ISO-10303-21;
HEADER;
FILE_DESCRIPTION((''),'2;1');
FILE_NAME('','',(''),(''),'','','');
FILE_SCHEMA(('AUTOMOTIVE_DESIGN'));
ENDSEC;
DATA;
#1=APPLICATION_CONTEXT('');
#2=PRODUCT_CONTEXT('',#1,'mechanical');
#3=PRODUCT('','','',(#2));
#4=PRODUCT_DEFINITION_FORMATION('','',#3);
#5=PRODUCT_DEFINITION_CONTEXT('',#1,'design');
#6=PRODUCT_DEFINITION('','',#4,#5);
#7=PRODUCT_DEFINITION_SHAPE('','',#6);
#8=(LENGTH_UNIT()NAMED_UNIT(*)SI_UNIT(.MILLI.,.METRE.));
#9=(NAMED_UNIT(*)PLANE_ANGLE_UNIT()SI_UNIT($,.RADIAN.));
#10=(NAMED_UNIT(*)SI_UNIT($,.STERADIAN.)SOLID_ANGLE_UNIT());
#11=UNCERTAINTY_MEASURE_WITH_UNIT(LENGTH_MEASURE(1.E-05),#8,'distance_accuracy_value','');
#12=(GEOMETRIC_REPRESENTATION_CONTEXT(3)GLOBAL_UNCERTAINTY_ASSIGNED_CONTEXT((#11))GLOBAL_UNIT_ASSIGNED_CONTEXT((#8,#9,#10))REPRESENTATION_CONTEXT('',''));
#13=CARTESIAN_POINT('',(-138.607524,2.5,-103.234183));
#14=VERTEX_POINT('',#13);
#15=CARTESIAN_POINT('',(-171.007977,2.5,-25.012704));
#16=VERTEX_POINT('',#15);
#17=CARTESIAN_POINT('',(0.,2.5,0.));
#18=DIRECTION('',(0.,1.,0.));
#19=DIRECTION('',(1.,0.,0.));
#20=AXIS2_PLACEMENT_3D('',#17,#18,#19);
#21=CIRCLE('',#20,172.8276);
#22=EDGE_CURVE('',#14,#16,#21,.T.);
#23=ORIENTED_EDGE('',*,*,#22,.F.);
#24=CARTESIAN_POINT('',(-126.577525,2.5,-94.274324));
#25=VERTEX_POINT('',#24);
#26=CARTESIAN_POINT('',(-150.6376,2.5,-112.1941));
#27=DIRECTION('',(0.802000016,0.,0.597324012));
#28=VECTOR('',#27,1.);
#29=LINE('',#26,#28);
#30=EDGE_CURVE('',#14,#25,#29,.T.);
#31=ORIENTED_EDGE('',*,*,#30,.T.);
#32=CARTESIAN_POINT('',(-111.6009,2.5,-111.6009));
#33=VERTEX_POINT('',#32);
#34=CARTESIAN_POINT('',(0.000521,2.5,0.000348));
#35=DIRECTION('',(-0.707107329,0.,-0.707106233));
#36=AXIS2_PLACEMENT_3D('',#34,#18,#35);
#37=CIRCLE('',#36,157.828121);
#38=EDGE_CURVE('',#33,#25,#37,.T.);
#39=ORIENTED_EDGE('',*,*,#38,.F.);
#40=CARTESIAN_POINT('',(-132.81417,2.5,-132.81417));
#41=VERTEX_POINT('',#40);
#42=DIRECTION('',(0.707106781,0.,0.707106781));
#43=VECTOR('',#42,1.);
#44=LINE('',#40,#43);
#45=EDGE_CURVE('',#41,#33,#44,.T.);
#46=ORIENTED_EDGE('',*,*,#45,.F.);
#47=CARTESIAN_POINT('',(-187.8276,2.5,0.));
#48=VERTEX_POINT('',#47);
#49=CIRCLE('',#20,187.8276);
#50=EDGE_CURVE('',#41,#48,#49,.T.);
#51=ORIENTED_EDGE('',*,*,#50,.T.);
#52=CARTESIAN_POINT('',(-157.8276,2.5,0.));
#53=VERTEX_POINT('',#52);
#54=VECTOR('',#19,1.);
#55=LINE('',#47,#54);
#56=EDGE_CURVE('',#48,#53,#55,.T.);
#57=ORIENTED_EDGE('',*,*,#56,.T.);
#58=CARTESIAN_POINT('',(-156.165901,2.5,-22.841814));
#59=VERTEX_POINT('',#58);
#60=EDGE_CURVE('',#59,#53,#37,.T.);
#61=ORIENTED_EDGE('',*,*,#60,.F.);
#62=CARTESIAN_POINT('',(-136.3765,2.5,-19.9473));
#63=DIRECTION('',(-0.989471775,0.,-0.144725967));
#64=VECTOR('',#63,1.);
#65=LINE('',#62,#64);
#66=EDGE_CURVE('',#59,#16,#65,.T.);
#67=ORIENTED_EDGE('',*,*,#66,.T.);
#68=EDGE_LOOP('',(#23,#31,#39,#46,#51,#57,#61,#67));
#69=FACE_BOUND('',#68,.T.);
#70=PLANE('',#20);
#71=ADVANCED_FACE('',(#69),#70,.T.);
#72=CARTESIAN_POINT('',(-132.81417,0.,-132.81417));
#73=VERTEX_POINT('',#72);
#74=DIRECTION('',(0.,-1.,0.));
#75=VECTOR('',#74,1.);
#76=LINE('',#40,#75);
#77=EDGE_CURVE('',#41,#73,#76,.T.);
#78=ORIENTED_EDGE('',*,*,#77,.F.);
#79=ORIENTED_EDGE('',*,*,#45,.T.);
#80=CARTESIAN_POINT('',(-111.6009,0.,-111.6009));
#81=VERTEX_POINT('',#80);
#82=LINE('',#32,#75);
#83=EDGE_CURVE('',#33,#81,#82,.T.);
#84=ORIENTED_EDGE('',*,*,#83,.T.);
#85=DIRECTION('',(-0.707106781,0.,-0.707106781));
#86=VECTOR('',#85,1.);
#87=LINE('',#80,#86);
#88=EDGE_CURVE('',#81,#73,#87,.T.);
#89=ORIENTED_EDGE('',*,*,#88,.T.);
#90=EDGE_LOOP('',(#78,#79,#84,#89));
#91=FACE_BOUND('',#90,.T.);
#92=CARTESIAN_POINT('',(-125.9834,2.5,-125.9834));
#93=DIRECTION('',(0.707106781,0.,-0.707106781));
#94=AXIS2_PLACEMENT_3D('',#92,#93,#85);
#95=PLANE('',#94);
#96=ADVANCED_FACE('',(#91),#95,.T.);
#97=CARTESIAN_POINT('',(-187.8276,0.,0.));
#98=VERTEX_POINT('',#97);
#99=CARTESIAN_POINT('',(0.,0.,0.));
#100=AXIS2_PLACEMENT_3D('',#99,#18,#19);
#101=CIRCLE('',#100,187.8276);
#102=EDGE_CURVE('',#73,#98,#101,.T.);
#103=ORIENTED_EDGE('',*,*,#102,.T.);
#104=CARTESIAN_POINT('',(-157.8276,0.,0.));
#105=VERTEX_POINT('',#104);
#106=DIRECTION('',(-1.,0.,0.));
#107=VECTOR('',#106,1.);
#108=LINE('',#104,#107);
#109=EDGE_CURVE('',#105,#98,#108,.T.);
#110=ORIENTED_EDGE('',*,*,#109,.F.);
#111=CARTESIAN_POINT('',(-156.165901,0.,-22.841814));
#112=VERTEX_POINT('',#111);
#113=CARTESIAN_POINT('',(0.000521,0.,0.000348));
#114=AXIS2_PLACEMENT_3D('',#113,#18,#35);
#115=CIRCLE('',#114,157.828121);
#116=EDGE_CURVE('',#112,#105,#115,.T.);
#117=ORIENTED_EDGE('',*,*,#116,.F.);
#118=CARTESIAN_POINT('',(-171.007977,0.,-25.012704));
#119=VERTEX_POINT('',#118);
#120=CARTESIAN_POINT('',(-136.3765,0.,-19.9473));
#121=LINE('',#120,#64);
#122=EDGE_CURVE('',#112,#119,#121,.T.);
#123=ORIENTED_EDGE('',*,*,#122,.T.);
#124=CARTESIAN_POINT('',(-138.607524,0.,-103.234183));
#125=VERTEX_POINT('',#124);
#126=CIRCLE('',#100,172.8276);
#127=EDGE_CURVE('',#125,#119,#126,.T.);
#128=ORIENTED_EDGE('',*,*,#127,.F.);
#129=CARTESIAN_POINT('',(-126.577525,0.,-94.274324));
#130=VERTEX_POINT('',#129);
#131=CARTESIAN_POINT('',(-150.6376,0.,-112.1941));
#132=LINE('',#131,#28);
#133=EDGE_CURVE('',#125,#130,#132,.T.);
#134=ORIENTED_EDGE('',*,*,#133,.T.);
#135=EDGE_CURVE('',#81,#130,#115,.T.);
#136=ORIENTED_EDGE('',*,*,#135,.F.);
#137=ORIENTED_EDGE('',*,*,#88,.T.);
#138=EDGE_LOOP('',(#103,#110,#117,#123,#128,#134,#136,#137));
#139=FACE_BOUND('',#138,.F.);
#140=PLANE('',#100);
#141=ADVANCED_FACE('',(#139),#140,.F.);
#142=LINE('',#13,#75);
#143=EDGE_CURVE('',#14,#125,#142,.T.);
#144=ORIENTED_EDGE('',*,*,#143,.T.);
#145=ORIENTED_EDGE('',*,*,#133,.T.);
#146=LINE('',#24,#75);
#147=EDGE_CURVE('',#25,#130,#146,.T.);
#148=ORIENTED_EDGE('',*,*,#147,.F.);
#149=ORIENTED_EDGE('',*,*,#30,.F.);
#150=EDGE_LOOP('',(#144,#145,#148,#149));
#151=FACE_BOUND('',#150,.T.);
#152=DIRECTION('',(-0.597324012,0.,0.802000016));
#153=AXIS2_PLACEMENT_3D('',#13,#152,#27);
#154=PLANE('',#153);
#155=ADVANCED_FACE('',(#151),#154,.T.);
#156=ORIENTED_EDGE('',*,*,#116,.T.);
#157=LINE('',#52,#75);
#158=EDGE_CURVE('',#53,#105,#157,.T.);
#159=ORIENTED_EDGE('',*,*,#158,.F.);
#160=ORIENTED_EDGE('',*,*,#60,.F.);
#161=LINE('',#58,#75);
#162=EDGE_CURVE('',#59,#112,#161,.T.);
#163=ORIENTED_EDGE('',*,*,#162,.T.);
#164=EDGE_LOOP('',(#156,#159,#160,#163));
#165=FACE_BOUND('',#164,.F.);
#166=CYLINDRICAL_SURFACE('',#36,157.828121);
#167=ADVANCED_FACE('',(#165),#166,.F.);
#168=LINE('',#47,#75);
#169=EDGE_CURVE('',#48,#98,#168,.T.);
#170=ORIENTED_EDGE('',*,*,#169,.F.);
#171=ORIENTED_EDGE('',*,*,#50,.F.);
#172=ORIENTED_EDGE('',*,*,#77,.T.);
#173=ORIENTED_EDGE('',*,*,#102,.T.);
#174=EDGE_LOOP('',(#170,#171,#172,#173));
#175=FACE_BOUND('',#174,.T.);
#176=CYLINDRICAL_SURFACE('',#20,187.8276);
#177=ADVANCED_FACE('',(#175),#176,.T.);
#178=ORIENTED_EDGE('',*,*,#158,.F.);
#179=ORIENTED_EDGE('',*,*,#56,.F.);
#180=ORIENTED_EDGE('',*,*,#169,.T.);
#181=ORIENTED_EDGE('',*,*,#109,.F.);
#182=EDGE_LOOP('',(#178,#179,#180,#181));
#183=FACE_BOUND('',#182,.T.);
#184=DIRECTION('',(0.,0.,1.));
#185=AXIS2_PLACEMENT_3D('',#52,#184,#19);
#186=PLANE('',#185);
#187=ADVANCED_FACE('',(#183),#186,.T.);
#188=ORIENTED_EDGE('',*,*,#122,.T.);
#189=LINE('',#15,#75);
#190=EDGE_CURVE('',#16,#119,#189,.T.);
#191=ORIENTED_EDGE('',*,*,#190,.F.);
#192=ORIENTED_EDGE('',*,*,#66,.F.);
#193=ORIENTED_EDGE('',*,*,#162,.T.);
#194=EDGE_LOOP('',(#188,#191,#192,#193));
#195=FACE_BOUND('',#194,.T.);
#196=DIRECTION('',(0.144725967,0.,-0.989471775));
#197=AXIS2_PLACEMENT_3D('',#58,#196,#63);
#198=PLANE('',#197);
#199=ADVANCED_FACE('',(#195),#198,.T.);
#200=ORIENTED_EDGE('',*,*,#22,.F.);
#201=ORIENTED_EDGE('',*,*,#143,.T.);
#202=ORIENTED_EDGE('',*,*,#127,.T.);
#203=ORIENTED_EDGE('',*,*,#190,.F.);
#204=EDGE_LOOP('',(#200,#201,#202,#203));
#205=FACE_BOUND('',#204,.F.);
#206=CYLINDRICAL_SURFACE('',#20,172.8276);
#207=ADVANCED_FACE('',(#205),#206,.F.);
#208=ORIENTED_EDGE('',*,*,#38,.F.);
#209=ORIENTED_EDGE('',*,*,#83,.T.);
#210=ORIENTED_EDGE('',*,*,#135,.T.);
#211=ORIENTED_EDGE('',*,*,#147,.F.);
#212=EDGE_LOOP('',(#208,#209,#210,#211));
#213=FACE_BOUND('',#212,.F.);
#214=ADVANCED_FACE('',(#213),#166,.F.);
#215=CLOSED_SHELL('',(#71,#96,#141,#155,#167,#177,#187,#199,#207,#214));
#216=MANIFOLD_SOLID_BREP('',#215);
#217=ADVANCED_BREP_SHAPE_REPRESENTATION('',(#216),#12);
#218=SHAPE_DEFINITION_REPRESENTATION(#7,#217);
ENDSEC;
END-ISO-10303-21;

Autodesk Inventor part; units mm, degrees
ref_plane "YZ Plane" through (0, 0, 0) normal (1, 0, 0) x (0, 1, 0)
ref_plane "XZ Plane" through (0, 0, 0) normal (0, 1, 0) x (-1, 0, 0)
ref_plane "XY Plane" through (0, 0, 0) normal (0, 0, 1) x (1, 0, 0)
sketch "スケッチ1" plane through (0, 0, 0) normal (0, 1, 0) x (-1, 0, 0)
  circle A0 centre (0, 0) radius 178.1675
  circle A1 centre (0, 0) radius 157.8276
  line L0 (168.1877, 0) -> (166.7488, -21.9529)
  line L1 (168.1877, 0) -> (130.1721, 2.4917) construction
  line L2 (249.4344, 0) -> (-249.4344, 0) projected
  line L3 (166.7488, -21.9529) -> (156.7702, -21.2989)
  line L4 (156.7702, -21.2989) -> (158.2091, 0.654) construction
  line L5 (158.2091, 0.654) -> (168.1877, 0)
  line L6 (157.4896, -10.3224) -> (0, 0)
  line L7 (166.7488, -21.9529) -> (162.4568, -43.5302)
  line L8 (162.4568, -43.5302) -> (152.649, -41.5793) construction
  line L9 (152.649, -41.5793) -> (156.9409, -20.002) construction
  line L10 (156.9409, -20.002) -> (166.7488, -21.9529) construction
  line L11 (162.4568, -43.5302) -> (155.3851, -64.3626)
  line L12 (155.3851, -64.3626) -> (145.9158, -61.1482) construction
  line L13 (145.9158, -61.1482) -> (152.9875, -40.3158) construction
  line L14 (152.9875, -40.3158) -> (162.4568, -43.5302) construction
  line L15 (155.3851, -64.3626) -> (145.6548, -84.0938)
  line L16 (145.6548, -84.0938) -> (136.6861, -79.6709) construction
  line L17 (136.6861, -79.6709) -> (146.4164, -59.9397) construction
  line L18 (146.4164, -59.9397) -> (155.3851, -64.3626) construction
  line L19 (0, 0) -> (111.6009, -111.6009)
  line L20 (145.6548, -84.0938) -> (137.3401, -78.5381) construction
  line L21 (137.3401, -78.5381) -> (125.1176, -96.8305) construction
  line L22 (125.1176, -96.8305) -> (133.4323, -102.3862) construction
  line L23 (133.4323, -102.3862) -> (145.6548, -84.0938)
  line L24 (133.4323, -102.3862) -> (125.9139, -95.7927) construction
  line L25 (125.9139, -95.7927) -> (111.4082, -112.3332) construction
  line L26 (111.4082, -112.3332) -> (118.9266, -118.9266)
  line L27 (118.9266, -118.9266) -> (133.4323, -102.3862)
  line L28 (111.6009, -111.6009) -> (118.9266, -118.9266)
  line L29 (166.7488, -21.9529) -> (176.7274, -22.6069) construction
  line L30 (118.9266, -118.9266) -> (125.9834, -125.9834)
  point P0 (154.795, -30.7906)
  point P1 (149.4517, -50.732)
  point P2 (141.5512, -69.8053)
  point P3 (131.2288, -87.6843)
  point P4 (118.661, -104.0629)
  point P5 (157.8276, 0)
  point P6 (178.1675, 0)
  dimension "d0" = 22
  dimension "d1" = 10
  dimension "d2" = 45
  dimension "d4" = 315.6551
extrude "押し出し1" add sketch "スケッチ1" along normal blind 2.5 contours L30 L27 L23 L15 L11 L7 L0 L2 A0 | L28 A1 L2 L0 L7 L11 L15 L23 L27
sketch "スケッチ2" plane through (0, 2.5, 0) normal (0, 1, 0) x (1, 0, 0)
  circle A0 centre (0, 0) radius 277.8276
  line L0 (-168.1877, 0) -> (-166.7488, 21.9529) projected
  line L1 (-166.7488, 21.9529) -> (-162.4568, 43.5302) projected
  line L2 (-162.4568, 43.5302) -> (-155.3851, 64.3626) projected
  line L3 (-155.3851, 64.3626) -> (-145.6548, 84.0938) projected
  line L4 (-133.4323, 102.3862) -> (-145.6548, 84.0938) projected
  line L5 (-118.9266, 118.9266) -> (-133.4323, 102.3862) projected
  line L6 (-167.4682, 10.9764) -> (-166.0294, 32.9293)
  line L7 (-166.0294, 32.9293) -> (-275.7938, 40.1237)
  line L8 (-275.7938, 40.1237) -> (-277.2327, 18.1708)
  line L9 (-277.2327, 18.1708) -> (-167.4682, 10.9764)
  line L10 (-164.6028, 32.7415) -> (-160.3108, 54.3188)
  line L11 (-160.3108, 54.3188) -> (-268.1972, 75.7787)
  line L12 (-268.1972, 75.7787) -> (-272.4892, 54.2015)
  line L13 (-272.4892, 54.2015) -> (-164.6028, 32.7415)
  circle A1 centre (-166.7488, 21.9529) radius 11
  circle A2 centre (-162.4568, 43.5302) radius 11
  line L14 (-158.921, 53.9464) -> (-151.8493, 74.7789)
  line L15 (-151.8493, 74.7789) -> (-256.0116, 110.1372)
  line L16 (-256.0116, 110.1372) -> (-263.0833, 89.3047)
  line L17 (-263.0833, 89.3047) -> (-158.921, 53.9464)
  circle A3 centre (-155.3851, 64.3626) radius 11
  arc A4 (-275.7591, 62.4834) -> (-281.3553, 41.7349) centre (-166.7488, 21.9529) ccw
  line L18 (-178.1663, 0.654) -> (-158.2091, -0.654)
  line L19 (-158.2091, -0.654) -> (-156.7702, 21.2989)
  line L20 (-156.7702, 21.2989) -> (-176.7274, 22.6069)
  line L21 (-176.7274, 22.6069) -> (-178.1663, 0.654)
  line L22 (-177.4468, 11.6305) -> (-275.7938, 40.1237)
  line L23 (-176.7274, 22.6069) -> (-176.008, 33.5834)
  line L24 (-176.008, 33.5834) -> (-275.7591, 62.4834)
  line L25 (-275.7938, 40.1237) -> (-281.3553, 41.7349)
  circle A5 centre (0, 0) radius 137.8276
  line L26 (0, 0) -> (-196.4538, 196.4538)
  line L27 (-111.6009, 111.6009) -> (-125.9834, 125.9834) projected
  line L28 (-411.1762, 0) -> (411.1762, 0) projected
  circle A6 centre (0, 0) radius 257.8276 construction
  arc A7 (-111.6009, 111.6009) -> (-157.8276, 0) centre (0, 0) ccw projected
  point P0 (-158.1662, 0)
  point P1 (-137.8276, 0)
  point P2 (-97.4588, 97.4588)
  point P3 (-277.8276, 0)
  dimension "d7" = 22
  dimension "d10" = 20
  dimension "d11" = 100
  dimension "d12" = 20
  dimension "d14" = 20
  dimension "d17" = 100
extrude "押し出し2" add sketch "スケッチ2" against normal blind 2.5 contours L26 L5 L4 L3 A3 L15 A0 | A0 L9 L21 L18 L28 | L15 A3 L17 A0 | A0 L22 L9 | L18 L21 L9 L0 | L0 A1 L19 L28 | A5 L28 A7 A1 A2 A3 L26 | L17 A2 L11 A0 | A3 L3 L14 | L14 L2 A3 | L26 A7 A3 L3 L4 L5 | A0 L7 L23 A1 L21 L22 | L21 A1 L9 | A1 L21 L20 L0 | L0 L20 L19 A1 | L19 A7 L28 | L11 A2 L13 L24 A0 | A2 A7 L1 L2 | L2 L10 A2 | A3 A7 A2 | L2 L3 A3 A7 | A0 L13 L24 L7 | A1 L23 L21 | L6 A1 L1 | L20 L23 A1 L6 | L1 A1 A7 L19 L20 | A1 A7 L19 | A3 A7 | L24 L13 A0 | L10 L1 A2 | A2 A7 | L24 L13 A1 L7 | L7 A1 L23 | A2 A7 A1 | A7 A1
sketch "スケッチ4" plane through (0, 2.5, 0) normal (0, 1, 0) x (1, 0, 0)
  circle A0 centre (0, 0) radius 187.8276
  arc A1 (-97.4588, 97.4588) -> (-137.8276, 0) centre (0, 0) ccw projected
  line L0 (-137.5954, 7.9966) -> (-137.8276, 0)
  arc A2 (-196.4538, 196.4538) -> (-277.8276, 0) centre (0, 0) ccw projected
  line L1 (-97.4588, 97.4588) -> (-196.4538, 196.4538) projected
  circle A3 centre (0, 0) radius 157.8276
  circle A4 centre (0, 0) radius 172.8276
  line L2 (-97.4588, 97.4588) -> (-196.4538, 196.4538) projected
  arc A5 (-196.4538, 196.4538) -> (-277.8276, 0) centre (0, 0) ccw projected
  line L3 (-277.8276, 0) -> (-137.8276, 0) projected
  arc A6 (-97.4588, 97.4588) -> (-137.8276, 0) centre (0, 0) ccw projected
  point P0 (-277.3596, 16.1193)
  point P1 (-111.6009, 111.6009)
  point P2 (-157.8276, 0)
  point P3 (-187.8276, 0)
  point P4 (-132.8141, 132.8141)
  point P5 (-277.8276, 0)
  point P6 (-172.8276, 0)
  point P7 (-122.2075, 122.2075)
  dimension "d23" = 50
  dimension "d29" = 20
  dimension "d30" = 15
extrude "押し出し4" cut sketch "スケッチ4" against normal through all contours A0 L3 A4 L1 | A0 L3 A2 L1 | A4 L3 A3 L1 | L1 A3 L3 A4 | A3 L3 L0 A1 L1 | L1 A1 L3 A3 picked at (-124.5192, 133.5739)
sketch "スケッチ5" plane through (0, 2.5, 0) normal (0, 1, 0) x (1, 0, 0)
  line L0 (-136.3765, 19.9473) -> (-185.8501, 27.1836) projected
  line L1 (-277.8276, 0) -> (-137.8276, 0) projected
  line L2 (-136.3765, 19.9473) -> (-185.8501, 27.1836) projected
  arc A0 (-185.8501, 27.1836) -> (-186.1918, 24.735) centre (0, 0) ccw projected
  arc A1 (-201.9314, 11.7356) -> (-186.1918, 24.735) centre (-201.0611, 26.7104) ccw projected
  line L3 (-201.9314, 11.7356) -> (-277.3596, 16.1193) projected
  arc A2 (-277.3596, 16.1193) -> (-277.8276, 0) centre (0, 0) ccw projected
  line L4 (-277.8276, 0) -> (-137.8276, 0) projected
  arc A3 (-136.3765, 19.9473) -> (-137.8276, 0) centre (0, 0) ccw projected
  line L5 (-150.6376, 112.1941) -> (-110.5376, 82.3279) projected
  arc A4 (-97.4588, 97.4588) -> (-110.5376, 82.3279) centre (0, 0) ccw projected
  line L6 (-97.4588, 97.4588) -> (-196.4538, 196.4538) projected
  arc A5 (-196.4538, 196.4538) -> (-207.5209, 184.7248) centre (0, 0) ccw projected
  line L7 (-207.5209, 184.7248) -> (-151.0854, 134.4887) projected
  arc A6 (-149.1478, 114.1672) -> (-151.0854, 134.4887) centre (-161.0588, 123.2846) ccw projected
  arc A7 (-149.1478, 114.1672) -> (-150.6376, 112.1941) centre (0, 0) ccw projected
  arc A8 (-111.6009, 111.6009) -> (-157.8276, 0) centre (0, 0) ccw projected
  arc A9 (-122.2075, 122.2075) -> (-172.8276, 0) centre (0, 0) ccw projected
  point P0 (-171.008, 25.0127)
  point P1 (-156.1659, 22.8418)
  point P2 (-138.6076, 103.2343)
  point P3 (-126.5776, 94.2744)
extrude "押し出し5" add sketch "スケッチ5" against normal up to surface (2.5 mm away) contours A8 L1 A9 L0 | L5 A9 L6 A8
properties part number "belt_rail" material "木材 (カエデ材)"
